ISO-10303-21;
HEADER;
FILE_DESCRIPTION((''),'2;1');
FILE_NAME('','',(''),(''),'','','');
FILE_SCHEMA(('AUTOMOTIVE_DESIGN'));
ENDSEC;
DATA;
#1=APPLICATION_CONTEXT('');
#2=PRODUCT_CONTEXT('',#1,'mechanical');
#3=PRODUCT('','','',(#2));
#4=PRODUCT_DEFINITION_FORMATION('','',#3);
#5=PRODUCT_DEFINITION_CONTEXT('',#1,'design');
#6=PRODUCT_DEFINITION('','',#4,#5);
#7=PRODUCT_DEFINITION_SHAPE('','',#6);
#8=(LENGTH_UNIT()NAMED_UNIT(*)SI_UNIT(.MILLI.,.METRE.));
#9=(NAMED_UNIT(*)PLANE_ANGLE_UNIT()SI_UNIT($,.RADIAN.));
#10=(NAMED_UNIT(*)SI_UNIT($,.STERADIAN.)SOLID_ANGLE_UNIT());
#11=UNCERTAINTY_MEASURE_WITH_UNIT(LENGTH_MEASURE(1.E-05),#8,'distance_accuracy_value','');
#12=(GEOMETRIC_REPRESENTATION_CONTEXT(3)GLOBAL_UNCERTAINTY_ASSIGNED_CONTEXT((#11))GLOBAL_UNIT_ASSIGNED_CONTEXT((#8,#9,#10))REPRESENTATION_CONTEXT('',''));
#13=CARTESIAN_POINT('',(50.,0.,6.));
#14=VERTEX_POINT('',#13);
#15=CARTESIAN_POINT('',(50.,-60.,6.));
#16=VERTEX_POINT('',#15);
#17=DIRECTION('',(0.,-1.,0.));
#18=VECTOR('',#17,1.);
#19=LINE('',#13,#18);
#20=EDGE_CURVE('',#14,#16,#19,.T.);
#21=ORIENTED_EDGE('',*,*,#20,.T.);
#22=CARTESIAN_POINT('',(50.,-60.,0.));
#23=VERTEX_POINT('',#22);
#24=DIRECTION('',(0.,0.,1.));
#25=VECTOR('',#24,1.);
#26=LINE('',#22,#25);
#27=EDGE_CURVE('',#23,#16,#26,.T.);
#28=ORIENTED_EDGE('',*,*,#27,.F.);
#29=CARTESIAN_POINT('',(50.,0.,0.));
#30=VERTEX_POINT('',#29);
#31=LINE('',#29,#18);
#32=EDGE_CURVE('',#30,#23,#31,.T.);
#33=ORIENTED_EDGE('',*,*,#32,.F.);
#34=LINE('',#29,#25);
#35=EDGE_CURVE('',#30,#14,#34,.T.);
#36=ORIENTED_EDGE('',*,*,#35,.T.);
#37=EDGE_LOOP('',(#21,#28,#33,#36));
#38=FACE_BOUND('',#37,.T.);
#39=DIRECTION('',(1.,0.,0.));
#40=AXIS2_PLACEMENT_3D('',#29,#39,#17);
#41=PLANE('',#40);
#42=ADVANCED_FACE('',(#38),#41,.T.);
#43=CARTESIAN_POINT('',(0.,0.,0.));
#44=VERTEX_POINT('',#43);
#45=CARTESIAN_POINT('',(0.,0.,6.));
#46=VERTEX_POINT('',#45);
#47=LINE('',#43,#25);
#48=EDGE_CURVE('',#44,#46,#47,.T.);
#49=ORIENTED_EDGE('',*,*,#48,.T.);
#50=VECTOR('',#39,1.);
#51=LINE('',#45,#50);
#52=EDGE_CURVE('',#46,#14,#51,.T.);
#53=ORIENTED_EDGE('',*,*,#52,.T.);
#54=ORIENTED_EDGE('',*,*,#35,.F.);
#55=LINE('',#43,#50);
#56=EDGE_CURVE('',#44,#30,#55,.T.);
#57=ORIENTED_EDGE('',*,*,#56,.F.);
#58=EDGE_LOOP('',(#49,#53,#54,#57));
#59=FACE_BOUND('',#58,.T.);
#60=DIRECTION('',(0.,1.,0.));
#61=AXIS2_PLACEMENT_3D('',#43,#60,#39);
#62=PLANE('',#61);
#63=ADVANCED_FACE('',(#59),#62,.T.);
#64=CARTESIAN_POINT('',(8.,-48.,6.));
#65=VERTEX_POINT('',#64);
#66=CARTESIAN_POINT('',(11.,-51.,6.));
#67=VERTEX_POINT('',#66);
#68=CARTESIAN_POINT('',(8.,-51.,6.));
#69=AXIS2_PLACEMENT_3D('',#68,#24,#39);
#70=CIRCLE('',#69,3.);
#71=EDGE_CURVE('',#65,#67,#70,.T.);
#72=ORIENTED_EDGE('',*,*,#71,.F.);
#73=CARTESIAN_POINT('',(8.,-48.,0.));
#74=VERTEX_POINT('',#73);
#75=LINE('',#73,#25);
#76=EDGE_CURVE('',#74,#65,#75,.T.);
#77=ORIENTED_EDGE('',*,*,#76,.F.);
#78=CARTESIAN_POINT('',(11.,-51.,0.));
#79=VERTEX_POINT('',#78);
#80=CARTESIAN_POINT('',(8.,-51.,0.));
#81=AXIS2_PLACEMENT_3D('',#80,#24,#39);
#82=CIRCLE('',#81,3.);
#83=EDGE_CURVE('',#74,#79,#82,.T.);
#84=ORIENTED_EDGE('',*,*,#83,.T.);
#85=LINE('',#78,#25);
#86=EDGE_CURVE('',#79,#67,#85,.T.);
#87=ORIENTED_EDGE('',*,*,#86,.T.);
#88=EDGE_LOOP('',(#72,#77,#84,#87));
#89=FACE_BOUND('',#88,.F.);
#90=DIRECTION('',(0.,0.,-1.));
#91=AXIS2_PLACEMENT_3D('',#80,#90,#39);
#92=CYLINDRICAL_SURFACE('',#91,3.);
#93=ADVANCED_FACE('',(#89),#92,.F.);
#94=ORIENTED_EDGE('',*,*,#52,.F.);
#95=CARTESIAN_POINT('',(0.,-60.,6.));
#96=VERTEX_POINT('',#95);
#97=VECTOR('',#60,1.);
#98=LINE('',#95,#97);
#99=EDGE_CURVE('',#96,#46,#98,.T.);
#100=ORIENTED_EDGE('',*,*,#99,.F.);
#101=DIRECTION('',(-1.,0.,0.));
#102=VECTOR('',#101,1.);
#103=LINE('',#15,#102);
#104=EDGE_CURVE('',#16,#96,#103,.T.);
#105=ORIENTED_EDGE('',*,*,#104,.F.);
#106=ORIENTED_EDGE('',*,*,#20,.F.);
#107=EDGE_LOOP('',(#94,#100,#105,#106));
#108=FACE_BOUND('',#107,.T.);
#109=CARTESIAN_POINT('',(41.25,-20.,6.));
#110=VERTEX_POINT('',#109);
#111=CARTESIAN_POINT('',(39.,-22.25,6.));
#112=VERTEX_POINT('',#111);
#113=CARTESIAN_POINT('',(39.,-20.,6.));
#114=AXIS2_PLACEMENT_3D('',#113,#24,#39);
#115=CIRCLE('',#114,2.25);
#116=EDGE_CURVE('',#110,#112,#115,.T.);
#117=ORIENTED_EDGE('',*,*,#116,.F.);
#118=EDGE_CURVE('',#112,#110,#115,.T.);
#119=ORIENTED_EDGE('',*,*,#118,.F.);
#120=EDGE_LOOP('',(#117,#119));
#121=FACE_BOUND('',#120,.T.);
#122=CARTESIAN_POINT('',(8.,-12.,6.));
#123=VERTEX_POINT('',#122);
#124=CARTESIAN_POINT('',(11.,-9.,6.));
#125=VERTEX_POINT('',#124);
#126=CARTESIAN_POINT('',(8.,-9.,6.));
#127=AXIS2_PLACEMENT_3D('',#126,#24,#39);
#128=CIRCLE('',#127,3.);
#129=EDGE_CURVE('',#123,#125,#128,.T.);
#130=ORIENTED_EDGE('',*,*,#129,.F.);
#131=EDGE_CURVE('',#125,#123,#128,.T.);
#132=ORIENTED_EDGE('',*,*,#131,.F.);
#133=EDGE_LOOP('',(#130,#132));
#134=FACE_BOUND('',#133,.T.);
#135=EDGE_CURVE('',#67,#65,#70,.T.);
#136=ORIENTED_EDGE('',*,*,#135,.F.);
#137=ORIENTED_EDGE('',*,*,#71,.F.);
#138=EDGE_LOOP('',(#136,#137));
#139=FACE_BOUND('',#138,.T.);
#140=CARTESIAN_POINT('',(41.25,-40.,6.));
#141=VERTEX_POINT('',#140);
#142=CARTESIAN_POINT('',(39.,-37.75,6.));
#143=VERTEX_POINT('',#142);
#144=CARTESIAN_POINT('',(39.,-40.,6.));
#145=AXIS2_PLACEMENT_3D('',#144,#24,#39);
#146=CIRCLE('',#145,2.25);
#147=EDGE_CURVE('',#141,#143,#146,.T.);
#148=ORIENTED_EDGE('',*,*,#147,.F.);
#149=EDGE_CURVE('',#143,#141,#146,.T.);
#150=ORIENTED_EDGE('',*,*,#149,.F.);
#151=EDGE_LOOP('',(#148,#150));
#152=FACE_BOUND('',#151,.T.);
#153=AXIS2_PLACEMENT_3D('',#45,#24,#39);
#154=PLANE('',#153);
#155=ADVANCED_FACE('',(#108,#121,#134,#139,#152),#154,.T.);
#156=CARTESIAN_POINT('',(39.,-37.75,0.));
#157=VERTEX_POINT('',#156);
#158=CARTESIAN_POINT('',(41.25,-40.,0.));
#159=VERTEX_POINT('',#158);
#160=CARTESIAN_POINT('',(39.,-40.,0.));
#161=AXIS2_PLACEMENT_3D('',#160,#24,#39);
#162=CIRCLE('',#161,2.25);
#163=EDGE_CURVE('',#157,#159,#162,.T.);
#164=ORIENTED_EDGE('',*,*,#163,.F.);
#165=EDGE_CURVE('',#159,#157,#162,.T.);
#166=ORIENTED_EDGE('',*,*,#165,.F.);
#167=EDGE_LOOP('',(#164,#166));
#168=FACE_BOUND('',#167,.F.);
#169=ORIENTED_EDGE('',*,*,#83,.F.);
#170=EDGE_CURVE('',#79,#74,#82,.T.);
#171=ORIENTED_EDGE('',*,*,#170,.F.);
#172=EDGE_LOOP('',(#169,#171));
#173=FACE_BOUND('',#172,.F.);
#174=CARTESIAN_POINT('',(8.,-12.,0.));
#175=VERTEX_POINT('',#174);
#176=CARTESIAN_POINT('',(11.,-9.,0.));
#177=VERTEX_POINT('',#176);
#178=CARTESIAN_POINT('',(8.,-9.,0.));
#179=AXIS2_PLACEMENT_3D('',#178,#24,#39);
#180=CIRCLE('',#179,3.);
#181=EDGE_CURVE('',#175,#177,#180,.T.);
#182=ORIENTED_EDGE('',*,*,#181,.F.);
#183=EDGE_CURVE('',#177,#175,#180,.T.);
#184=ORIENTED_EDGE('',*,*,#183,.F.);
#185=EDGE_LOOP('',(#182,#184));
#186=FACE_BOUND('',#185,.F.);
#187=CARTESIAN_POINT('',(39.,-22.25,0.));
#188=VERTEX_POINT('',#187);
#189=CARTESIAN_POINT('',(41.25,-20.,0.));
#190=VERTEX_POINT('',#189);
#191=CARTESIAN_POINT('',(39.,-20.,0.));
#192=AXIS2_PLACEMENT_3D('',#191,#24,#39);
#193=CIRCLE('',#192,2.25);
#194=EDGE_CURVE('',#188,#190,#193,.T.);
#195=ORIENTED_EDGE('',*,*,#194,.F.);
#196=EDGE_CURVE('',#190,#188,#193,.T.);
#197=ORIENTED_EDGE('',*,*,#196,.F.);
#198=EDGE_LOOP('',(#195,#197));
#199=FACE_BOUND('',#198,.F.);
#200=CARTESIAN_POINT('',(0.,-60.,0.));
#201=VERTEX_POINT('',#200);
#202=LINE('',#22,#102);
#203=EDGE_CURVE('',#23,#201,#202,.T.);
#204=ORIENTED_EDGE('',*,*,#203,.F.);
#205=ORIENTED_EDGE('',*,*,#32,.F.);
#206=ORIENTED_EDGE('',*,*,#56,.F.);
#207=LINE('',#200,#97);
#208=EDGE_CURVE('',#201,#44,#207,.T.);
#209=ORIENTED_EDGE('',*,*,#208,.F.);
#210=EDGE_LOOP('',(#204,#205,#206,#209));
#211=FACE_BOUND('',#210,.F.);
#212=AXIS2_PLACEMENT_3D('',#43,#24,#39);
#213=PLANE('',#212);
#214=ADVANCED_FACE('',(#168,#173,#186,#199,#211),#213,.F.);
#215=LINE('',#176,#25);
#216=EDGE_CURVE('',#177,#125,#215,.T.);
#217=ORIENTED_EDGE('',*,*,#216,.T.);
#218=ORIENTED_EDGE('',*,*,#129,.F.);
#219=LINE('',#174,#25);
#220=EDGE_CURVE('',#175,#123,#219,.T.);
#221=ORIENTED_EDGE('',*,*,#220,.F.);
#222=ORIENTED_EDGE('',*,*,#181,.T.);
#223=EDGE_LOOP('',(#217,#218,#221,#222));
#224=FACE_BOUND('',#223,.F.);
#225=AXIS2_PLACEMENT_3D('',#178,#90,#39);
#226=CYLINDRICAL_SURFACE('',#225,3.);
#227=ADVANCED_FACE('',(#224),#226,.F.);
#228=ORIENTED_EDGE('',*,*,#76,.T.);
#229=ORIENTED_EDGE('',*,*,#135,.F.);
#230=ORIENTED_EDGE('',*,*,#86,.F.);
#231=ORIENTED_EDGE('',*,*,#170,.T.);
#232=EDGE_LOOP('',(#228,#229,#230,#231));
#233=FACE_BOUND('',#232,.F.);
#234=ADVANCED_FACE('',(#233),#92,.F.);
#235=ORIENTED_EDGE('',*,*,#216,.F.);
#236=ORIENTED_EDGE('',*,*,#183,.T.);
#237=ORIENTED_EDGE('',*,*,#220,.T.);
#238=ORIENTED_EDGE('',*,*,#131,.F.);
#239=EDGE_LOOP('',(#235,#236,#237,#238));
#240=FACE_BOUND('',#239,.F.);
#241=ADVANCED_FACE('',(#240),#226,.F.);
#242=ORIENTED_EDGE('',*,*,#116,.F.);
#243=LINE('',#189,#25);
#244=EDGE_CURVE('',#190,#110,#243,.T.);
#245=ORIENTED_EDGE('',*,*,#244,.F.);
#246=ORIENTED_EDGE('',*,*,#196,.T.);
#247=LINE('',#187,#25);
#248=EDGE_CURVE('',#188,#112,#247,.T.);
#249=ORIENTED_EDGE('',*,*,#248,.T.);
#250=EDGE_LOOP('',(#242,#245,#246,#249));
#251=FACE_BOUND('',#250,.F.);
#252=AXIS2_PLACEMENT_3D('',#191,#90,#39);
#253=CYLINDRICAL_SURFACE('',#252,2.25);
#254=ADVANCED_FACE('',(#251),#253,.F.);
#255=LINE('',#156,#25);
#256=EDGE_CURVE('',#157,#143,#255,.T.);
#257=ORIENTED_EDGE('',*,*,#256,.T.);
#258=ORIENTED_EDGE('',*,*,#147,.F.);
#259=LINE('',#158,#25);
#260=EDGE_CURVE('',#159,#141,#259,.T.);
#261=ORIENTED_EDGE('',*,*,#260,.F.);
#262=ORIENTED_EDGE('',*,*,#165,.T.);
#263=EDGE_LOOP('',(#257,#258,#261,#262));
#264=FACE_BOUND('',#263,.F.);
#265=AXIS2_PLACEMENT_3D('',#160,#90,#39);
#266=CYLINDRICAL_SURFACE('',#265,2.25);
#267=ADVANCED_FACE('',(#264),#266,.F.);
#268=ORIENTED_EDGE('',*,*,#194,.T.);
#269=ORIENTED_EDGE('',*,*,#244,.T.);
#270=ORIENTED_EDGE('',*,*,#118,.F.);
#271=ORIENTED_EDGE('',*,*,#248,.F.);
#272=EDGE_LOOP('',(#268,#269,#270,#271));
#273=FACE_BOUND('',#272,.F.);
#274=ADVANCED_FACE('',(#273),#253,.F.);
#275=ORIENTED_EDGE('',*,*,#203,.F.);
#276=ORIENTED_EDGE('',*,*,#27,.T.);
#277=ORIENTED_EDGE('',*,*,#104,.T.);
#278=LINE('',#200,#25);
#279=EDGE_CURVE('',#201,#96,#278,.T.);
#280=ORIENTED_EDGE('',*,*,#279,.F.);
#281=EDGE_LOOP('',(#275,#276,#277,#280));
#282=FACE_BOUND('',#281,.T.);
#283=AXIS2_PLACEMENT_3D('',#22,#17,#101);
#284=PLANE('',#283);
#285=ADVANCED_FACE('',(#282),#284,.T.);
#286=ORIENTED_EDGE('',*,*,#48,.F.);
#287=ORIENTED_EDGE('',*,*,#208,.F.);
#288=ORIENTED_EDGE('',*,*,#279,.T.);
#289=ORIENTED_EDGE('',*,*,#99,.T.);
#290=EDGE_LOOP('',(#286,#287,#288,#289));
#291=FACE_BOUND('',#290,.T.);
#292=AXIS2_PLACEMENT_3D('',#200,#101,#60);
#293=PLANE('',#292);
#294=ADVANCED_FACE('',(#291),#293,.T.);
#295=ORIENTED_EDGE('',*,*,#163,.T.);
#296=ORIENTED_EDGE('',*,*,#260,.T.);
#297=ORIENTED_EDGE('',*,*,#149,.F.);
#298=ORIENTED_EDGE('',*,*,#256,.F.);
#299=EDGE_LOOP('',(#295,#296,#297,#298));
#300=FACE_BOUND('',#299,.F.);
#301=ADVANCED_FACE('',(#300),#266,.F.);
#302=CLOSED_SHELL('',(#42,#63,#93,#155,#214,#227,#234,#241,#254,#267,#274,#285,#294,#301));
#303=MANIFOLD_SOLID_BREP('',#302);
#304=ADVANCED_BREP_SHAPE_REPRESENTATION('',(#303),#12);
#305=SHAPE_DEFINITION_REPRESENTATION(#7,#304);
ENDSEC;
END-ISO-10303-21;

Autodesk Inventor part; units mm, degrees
ref_plane "YZ Plane" through (0, 0, 0) normal (1, 0, 0) x (0, 1, 0)
ref_plane "XZ Plane" through (0, 0, 0) normal (0, 1, 0) x (-1, 0, 0)
ref_plane "XY Plane" through (0, 0, 0) normal (0, 0, 1) x (1, 0, 0)
sketch "Sketch1" plane through (0, 0, 0) normal (0, 0, 1) x (1, 0, 0)
  line L0 (0, 0) -> (50, 0)
  line L1 (50, 0) -> (50, -60)
  line L2 (50, -60) -> (0, -60)
  line L3 (0, -60) -> (0, 0)
  circle A0 centre (8, -51) radius 3
  circle A1 centre (8, -9) radius 3
  line L4 (8, -51) -> (8, -9)
  circle A2 centre (39, -40) radius 2.25
  circle A3 centre (39, -20) radius 2.25
  line L5 (39, -40) -> (39, -20)
  dimension "d0" = 50
  dimension "d3" = 60
  dimension "d4" = 6
  dimension "d5" = 6
  dimension "d6" = 42
  dimension "d7" = 8
  dimension "d8" = 9
  dimension "d9" = 4.5
  dimension "d10" = 4.5
  dimension "d11" = 20
  dimension "d12" = 11
  dimension "d13" = 20
extrude "Extrusion1" add sketch "Sketch1" along normal blind 6
equation "\"d8\" = -0.5 * d6 + 0.5 * d3"
equation "\"d13\" = -0.5 * d11 + 0.5 * d3"
properties part number "plateencoder" material "PMMA Plastic"
